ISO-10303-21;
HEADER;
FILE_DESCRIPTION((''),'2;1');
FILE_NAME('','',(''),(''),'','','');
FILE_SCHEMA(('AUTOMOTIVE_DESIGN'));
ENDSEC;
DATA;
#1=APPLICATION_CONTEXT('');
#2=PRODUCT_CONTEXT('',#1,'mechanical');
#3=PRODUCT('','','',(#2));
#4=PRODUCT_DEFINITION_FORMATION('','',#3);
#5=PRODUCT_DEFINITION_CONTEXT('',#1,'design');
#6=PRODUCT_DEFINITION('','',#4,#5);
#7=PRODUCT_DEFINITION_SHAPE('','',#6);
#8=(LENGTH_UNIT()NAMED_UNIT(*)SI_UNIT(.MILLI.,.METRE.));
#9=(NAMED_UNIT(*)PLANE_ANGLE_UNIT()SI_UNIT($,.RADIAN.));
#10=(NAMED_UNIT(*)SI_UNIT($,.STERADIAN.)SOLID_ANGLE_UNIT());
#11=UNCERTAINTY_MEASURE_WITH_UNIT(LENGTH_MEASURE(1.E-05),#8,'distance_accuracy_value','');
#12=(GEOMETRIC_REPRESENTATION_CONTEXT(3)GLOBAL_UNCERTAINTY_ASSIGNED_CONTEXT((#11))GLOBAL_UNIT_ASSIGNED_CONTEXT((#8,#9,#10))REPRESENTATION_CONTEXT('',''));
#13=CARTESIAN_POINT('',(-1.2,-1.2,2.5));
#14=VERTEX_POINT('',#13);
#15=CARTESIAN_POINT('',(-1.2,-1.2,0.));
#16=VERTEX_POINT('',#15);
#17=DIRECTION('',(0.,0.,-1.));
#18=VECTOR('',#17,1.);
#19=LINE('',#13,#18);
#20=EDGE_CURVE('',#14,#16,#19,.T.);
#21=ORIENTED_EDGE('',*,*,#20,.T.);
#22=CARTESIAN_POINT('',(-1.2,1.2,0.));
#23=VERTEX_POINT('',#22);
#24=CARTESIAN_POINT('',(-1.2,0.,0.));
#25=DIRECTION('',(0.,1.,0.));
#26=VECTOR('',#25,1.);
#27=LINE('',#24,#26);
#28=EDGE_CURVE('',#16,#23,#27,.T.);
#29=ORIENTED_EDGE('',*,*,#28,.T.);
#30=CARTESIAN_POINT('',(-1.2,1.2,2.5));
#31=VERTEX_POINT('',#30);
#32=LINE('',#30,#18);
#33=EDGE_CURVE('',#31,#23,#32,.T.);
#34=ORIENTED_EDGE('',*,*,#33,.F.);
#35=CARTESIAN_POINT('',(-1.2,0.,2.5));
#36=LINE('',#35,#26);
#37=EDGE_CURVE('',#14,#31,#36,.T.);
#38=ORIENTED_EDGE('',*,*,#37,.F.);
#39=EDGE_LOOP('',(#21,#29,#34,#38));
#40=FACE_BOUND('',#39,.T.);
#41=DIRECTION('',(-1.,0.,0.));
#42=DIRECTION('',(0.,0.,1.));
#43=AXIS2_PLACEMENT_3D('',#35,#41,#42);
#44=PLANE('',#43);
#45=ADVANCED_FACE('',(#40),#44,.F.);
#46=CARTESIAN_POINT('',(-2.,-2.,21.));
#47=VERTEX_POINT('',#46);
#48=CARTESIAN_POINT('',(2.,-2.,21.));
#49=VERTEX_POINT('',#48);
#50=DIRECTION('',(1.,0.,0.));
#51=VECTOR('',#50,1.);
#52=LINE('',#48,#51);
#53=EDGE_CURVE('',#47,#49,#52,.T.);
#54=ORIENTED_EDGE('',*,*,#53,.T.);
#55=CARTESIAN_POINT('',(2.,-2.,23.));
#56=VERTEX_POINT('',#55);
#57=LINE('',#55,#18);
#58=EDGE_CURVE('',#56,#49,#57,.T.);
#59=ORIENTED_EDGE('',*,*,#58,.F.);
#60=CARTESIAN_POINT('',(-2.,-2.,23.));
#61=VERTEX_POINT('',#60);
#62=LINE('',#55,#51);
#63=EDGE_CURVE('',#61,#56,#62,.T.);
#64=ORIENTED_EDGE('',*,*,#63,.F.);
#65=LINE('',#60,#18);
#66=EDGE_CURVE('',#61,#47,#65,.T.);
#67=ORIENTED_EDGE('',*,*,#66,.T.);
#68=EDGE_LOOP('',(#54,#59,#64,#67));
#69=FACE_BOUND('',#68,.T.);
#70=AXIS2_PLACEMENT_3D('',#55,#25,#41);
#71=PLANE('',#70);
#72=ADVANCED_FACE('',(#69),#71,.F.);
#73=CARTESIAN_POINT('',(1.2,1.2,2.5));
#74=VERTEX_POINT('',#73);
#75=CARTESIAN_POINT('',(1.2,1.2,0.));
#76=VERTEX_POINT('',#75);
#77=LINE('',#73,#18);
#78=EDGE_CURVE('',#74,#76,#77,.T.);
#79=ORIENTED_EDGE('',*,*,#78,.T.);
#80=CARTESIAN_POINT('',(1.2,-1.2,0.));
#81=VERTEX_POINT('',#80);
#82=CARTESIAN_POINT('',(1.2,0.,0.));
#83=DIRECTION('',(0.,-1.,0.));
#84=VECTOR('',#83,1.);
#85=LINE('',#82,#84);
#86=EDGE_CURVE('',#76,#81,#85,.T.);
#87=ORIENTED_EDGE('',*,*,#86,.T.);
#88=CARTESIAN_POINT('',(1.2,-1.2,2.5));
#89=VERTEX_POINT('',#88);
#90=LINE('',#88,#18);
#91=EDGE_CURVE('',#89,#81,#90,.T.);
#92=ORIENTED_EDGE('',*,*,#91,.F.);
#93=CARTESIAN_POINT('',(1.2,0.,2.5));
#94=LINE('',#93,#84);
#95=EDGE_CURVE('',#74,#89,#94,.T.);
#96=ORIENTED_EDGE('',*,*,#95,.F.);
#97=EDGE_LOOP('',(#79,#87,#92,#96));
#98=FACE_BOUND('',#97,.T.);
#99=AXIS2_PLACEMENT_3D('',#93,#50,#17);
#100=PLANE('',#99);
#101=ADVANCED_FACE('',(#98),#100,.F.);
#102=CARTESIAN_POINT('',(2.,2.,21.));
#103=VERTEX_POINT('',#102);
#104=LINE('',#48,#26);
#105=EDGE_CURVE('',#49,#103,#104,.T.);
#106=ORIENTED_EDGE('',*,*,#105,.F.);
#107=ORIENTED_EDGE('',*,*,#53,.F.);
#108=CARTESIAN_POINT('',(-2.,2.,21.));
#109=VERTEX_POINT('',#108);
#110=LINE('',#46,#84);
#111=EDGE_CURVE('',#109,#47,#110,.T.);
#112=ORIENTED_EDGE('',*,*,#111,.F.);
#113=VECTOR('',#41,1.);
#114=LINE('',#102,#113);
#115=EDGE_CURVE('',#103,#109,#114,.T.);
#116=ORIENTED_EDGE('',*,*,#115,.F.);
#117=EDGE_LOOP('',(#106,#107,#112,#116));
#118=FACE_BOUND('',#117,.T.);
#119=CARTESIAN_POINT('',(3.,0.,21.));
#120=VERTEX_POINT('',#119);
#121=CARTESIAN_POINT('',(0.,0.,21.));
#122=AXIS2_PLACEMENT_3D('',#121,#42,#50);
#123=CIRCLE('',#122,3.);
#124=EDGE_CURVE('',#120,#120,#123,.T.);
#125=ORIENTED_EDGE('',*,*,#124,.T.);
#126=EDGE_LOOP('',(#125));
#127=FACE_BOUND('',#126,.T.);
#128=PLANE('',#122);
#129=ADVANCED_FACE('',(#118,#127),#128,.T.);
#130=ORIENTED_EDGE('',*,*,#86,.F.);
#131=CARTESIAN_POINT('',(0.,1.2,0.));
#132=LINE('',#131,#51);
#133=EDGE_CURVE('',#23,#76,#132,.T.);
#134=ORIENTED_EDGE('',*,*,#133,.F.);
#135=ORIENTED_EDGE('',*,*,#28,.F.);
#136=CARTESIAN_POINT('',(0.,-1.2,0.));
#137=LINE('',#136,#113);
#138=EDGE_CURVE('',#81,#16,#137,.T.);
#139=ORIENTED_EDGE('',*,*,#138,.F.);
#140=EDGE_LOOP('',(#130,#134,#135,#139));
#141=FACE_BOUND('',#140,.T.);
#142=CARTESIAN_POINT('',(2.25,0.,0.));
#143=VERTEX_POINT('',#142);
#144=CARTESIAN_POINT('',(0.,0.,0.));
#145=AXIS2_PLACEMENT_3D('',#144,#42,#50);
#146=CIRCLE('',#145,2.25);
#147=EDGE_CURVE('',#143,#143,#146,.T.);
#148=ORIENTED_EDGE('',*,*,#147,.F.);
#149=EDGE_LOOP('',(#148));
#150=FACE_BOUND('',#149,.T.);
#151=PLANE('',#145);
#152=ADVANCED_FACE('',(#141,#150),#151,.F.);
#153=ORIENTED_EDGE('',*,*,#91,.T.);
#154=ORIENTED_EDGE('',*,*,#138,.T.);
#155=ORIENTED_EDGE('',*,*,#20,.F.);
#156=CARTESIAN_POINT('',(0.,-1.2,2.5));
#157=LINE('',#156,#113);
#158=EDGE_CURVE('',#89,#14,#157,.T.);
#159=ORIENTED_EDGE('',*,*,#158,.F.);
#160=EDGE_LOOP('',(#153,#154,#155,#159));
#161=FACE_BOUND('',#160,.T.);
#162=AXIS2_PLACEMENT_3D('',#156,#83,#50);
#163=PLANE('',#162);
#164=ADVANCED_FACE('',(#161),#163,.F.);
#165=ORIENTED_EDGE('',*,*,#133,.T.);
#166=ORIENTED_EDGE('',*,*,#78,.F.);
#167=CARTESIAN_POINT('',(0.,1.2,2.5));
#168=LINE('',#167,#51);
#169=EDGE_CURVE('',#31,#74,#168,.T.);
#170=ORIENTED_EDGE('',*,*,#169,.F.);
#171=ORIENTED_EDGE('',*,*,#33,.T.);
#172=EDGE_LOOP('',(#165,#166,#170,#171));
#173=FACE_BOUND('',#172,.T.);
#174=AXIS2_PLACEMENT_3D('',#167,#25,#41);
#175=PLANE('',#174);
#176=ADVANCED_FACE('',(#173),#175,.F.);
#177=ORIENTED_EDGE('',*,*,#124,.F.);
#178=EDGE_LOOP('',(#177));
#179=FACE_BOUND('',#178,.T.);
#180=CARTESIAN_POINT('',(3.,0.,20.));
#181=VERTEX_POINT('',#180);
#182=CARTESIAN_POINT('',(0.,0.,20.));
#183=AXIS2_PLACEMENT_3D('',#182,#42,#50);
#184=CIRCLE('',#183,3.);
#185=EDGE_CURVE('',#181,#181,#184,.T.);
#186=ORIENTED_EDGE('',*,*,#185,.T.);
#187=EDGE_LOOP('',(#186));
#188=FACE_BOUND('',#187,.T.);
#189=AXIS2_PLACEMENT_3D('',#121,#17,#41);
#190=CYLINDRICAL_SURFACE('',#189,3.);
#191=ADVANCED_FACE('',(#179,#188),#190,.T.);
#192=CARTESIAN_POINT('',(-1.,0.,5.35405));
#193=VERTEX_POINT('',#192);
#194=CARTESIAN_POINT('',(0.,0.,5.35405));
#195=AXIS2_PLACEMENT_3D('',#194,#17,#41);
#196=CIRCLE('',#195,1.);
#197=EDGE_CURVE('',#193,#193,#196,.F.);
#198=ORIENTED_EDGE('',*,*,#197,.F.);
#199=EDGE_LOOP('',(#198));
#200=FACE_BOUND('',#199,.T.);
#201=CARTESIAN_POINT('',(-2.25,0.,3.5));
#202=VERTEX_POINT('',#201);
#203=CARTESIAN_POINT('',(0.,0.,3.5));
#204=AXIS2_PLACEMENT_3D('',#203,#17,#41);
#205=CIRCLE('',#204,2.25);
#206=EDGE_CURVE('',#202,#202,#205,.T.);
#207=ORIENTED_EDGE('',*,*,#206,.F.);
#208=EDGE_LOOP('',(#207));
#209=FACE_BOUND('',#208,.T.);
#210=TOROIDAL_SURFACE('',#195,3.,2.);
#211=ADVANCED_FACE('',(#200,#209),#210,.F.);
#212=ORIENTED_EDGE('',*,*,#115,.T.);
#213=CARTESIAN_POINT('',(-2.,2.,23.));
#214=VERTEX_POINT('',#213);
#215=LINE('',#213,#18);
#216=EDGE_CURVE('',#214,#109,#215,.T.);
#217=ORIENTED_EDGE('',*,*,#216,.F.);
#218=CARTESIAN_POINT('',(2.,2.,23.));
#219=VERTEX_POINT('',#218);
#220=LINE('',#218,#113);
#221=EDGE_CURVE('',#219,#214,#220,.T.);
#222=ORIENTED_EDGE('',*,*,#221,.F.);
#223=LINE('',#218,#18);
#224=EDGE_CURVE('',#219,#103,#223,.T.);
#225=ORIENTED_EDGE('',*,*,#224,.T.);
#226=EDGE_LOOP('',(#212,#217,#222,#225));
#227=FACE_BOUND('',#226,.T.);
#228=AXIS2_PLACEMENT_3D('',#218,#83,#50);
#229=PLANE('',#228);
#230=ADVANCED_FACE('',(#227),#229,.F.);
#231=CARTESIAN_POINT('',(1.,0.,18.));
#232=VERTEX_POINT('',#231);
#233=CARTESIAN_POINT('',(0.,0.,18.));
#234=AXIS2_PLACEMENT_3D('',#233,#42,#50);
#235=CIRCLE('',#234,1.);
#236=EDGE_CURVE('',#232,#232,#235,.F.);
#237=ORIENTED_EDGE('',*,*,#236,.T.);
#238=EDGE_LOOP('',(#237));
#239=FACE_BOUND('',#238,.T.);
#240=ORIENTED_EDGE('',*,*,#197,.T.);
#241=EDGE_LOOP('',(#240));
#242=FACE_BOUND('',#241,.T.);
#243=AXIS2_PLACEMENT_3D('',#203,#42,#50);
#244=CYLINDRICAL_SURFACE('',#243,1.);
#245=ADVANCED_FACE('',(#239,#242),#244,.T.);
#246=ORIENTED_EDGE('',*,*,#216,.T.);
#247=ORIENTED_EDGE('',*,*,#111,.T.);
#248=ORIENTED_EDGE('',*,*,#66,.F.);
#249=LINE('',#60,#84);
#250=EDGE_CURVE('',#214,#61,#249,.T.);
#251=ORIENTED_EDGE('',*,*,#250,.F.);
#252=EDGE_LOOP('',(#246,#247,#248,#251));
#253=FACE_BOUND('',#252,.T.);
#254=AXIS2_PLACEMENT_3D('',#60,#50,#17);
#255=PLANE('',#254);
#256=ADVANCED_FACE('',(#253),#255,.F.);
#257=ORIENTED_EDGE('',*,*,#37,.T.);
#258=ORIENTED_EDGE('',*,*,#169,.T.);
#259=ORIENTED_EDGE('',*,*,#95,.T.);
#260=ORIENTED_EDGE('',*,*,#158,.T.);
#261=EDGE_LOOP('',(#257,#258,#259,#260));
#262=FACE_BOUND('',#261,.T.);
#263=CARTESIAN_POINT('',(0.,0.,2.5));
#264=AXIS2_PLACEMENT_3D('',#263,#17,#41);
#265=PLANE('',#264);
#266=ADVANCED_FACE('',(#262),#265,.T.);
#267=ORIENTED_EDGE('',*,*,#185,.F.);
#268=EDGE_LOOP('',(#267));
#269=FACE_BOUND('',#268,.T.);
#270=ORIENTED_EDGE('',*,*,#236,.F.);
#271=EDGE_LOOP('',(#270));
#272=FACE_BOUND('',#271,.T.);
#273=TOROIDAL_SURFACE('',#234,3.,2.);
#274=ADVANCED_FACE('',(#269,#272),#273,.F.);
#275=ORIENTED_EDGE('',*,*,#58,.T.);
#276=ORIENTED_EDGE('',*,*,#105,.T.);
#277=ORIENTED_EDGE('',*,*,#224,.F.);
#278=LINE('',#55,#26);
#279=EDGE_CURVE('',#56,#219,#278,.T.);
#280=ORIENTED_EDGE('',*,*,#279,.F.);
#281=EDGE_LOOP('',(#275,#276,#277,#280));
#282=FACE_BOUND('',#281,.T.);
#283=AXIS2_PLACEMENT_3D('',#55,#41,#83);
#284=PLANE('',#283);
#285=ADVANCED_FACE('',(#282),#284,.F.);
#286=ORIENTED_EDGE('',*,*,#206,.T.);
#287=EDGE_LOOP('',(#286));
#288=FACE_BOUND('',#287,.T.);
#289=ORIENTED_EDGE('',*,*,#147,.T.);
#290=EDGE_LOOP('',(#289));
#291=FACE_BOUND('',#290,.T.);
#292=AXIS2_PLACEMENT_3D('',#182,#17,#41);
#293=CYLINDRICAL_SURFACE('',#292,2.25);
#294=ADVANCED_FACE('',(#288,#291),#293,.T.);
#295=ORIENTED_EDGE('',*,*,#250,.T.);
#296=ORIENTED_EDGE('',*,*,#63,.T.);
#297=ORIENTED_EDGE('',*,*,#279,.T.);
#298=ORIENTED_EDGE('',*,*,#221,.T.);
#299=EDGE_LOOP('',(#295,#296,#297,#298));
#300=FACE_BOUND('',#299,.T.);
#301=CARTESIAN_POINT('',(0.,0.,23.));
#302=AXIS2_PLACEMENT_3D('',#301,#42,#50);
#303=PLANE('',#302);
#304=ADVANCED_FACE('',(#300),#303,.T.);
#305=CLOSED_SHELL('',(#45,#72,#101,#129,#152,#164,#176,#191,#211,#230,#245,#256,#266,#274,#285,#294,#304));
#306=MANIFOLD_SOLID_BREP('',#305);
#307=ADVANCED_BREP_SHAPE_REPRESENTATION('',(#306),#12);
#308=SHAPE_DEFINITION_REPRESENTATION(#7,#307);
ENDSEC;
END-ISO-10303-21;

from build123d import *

# Parameters (mm, degrees)
SKETCH_1_R          = 2.25
EXTRUDE_2_DEPTH     = 20
SKETCH_7_W          = 2.4
SKETCH_7_H          = 2.4
CUT_EXTRUDE_3_DEPTH = 2.5
SKETCH_9_R          = 3
EXTRUDE_4_DEPTH     = 1
SKETCH_10_W         = 4
SKETCH_10_H         = 4
EXTRUDE_5_DEPTH     = 2
CUT_EXTRUDE_START   = -20
SKETCH_12_OUTSIDE_W = 12.904
SKETCH_12_OUTSIDE_H = 12.904
SKETCH_12_OUTSIDE_R = 1
CUT_EXTRUDE_4_DEPTH = 16.5
FILLET_1_R          = 2


with BuildPart() as part:
    # 草图1 → 凸台-拉伸2 (new body)
    with BuildSketch(Plane.XY):
        Circle(SKETCH_1_R)
    extrude(amount=EXTRUDE_2_DEPTH)

    # 草图7 → 切除-拉伸3 (cut)
    with BuildSketch(Plane.XY):
        Rectangle(SKETCH_7_W, SKETCH_7_H)
    extrude(amount=CUT_EXTRUDE_3_DEPTH, mode=Mode.SUBTRACT)

    # 草图9 → 凸台-拉伸4 (add)
    with BuildSketch(Plane.XY.offset(20)):
        Circle(SKETCH_9_R)
    extrude(amount=EXTRUDE_4_DEPTH)

    # 草图10 → 凸台-拉伸5 (add)
    with BuildSketch(Plane.XY.offset(21)):
        Rectangle(SKETCH_10_W, SKETCH_10_H)
    extrude(amount=EXTRUDE_5_DEPTH)

    # 草图12 outside → 切除-拉伸4 (cut)
    with BuildSketch(Plane(origin=(0, 0, 0), x_dir=(-1, 0, 0), z_dir=(0, 0, -1)).offset(CUT_EXTRUDE_START)):
        Rectangle(SKETCH_12_OUTSIDE_W, SKETCH_12_OUTSIDE_H)
        with Locations(Location((0, 0, 0), (0, 0, 180))):
            Circle(SKETCH_12_OUTSIDE_R, mode=Mode.SUBTRACT)
    extrude(amount=CUT_EXTRUDE_4_DEPTH, mode=Mode.SUBTRACT)

    # 圆角1
    # the kernel refuses this fillet: 2 mm, written as the material it adds along each edge
    with BuildSketch(Plane(origin=(0, 0, 3.5), x_dir=(1, 0, 0), z_dir=(0, 1, 0))) as fillet_1_piece_1:
        with BuildLine():
            CenterArc((3, -1.854049622), FILLET_1_R, 112.024312837, 67.975687163)
            Line((2.25, 0), (2.235, 0.037080992))
            ThreePointArc((2.235, 0.037080992), (1.625, 0.04), (1, 0.04))
            Line((1, 0.04), (0.96, 0))
            Line((0.96, 0), (0.96, -1.854049622))
            Line((0.96, -1.854049622), (1, -1.854049622))
        make_face()
    revolve(axis=Axis((0, 0, 3.5), (0, 0, -1)))
    with BuildSketch(Plane(origin=(0, 0, 20), x_dir=(1, 0, 0), z_dir=(0, 1, 0))) as fillet_1_piece_2:
        with BuildLine():
            CenterArc((1 + FILLET_1_R, FILLET_1_R), FILLET_1_R, 180, 90)
            Line((1, FILLET_1_R), (1 - FILLET_1_R * 0.02, FILLET_1_R))
            Line((1 - FILLET_1_R * 0.02, FILLET_1_R), (1 - FILLET_1_R * 0.02, -FILLET_1_R * 0.02))
            Line((1 - FILLET_1_R * 0.02, -FILLET_1_R * 0.02), (1 + FILLET_1_R, -FILLET_1_R * 0.02))
            Line((1 + FILLET_1_R, -FILLET_1_R * 0.02), (1 + FILLET_1_R, 0))
        make_face()
    revolve(axis=Axis((0, 0, 20), (0, 0, -1)))


solid = part.part
